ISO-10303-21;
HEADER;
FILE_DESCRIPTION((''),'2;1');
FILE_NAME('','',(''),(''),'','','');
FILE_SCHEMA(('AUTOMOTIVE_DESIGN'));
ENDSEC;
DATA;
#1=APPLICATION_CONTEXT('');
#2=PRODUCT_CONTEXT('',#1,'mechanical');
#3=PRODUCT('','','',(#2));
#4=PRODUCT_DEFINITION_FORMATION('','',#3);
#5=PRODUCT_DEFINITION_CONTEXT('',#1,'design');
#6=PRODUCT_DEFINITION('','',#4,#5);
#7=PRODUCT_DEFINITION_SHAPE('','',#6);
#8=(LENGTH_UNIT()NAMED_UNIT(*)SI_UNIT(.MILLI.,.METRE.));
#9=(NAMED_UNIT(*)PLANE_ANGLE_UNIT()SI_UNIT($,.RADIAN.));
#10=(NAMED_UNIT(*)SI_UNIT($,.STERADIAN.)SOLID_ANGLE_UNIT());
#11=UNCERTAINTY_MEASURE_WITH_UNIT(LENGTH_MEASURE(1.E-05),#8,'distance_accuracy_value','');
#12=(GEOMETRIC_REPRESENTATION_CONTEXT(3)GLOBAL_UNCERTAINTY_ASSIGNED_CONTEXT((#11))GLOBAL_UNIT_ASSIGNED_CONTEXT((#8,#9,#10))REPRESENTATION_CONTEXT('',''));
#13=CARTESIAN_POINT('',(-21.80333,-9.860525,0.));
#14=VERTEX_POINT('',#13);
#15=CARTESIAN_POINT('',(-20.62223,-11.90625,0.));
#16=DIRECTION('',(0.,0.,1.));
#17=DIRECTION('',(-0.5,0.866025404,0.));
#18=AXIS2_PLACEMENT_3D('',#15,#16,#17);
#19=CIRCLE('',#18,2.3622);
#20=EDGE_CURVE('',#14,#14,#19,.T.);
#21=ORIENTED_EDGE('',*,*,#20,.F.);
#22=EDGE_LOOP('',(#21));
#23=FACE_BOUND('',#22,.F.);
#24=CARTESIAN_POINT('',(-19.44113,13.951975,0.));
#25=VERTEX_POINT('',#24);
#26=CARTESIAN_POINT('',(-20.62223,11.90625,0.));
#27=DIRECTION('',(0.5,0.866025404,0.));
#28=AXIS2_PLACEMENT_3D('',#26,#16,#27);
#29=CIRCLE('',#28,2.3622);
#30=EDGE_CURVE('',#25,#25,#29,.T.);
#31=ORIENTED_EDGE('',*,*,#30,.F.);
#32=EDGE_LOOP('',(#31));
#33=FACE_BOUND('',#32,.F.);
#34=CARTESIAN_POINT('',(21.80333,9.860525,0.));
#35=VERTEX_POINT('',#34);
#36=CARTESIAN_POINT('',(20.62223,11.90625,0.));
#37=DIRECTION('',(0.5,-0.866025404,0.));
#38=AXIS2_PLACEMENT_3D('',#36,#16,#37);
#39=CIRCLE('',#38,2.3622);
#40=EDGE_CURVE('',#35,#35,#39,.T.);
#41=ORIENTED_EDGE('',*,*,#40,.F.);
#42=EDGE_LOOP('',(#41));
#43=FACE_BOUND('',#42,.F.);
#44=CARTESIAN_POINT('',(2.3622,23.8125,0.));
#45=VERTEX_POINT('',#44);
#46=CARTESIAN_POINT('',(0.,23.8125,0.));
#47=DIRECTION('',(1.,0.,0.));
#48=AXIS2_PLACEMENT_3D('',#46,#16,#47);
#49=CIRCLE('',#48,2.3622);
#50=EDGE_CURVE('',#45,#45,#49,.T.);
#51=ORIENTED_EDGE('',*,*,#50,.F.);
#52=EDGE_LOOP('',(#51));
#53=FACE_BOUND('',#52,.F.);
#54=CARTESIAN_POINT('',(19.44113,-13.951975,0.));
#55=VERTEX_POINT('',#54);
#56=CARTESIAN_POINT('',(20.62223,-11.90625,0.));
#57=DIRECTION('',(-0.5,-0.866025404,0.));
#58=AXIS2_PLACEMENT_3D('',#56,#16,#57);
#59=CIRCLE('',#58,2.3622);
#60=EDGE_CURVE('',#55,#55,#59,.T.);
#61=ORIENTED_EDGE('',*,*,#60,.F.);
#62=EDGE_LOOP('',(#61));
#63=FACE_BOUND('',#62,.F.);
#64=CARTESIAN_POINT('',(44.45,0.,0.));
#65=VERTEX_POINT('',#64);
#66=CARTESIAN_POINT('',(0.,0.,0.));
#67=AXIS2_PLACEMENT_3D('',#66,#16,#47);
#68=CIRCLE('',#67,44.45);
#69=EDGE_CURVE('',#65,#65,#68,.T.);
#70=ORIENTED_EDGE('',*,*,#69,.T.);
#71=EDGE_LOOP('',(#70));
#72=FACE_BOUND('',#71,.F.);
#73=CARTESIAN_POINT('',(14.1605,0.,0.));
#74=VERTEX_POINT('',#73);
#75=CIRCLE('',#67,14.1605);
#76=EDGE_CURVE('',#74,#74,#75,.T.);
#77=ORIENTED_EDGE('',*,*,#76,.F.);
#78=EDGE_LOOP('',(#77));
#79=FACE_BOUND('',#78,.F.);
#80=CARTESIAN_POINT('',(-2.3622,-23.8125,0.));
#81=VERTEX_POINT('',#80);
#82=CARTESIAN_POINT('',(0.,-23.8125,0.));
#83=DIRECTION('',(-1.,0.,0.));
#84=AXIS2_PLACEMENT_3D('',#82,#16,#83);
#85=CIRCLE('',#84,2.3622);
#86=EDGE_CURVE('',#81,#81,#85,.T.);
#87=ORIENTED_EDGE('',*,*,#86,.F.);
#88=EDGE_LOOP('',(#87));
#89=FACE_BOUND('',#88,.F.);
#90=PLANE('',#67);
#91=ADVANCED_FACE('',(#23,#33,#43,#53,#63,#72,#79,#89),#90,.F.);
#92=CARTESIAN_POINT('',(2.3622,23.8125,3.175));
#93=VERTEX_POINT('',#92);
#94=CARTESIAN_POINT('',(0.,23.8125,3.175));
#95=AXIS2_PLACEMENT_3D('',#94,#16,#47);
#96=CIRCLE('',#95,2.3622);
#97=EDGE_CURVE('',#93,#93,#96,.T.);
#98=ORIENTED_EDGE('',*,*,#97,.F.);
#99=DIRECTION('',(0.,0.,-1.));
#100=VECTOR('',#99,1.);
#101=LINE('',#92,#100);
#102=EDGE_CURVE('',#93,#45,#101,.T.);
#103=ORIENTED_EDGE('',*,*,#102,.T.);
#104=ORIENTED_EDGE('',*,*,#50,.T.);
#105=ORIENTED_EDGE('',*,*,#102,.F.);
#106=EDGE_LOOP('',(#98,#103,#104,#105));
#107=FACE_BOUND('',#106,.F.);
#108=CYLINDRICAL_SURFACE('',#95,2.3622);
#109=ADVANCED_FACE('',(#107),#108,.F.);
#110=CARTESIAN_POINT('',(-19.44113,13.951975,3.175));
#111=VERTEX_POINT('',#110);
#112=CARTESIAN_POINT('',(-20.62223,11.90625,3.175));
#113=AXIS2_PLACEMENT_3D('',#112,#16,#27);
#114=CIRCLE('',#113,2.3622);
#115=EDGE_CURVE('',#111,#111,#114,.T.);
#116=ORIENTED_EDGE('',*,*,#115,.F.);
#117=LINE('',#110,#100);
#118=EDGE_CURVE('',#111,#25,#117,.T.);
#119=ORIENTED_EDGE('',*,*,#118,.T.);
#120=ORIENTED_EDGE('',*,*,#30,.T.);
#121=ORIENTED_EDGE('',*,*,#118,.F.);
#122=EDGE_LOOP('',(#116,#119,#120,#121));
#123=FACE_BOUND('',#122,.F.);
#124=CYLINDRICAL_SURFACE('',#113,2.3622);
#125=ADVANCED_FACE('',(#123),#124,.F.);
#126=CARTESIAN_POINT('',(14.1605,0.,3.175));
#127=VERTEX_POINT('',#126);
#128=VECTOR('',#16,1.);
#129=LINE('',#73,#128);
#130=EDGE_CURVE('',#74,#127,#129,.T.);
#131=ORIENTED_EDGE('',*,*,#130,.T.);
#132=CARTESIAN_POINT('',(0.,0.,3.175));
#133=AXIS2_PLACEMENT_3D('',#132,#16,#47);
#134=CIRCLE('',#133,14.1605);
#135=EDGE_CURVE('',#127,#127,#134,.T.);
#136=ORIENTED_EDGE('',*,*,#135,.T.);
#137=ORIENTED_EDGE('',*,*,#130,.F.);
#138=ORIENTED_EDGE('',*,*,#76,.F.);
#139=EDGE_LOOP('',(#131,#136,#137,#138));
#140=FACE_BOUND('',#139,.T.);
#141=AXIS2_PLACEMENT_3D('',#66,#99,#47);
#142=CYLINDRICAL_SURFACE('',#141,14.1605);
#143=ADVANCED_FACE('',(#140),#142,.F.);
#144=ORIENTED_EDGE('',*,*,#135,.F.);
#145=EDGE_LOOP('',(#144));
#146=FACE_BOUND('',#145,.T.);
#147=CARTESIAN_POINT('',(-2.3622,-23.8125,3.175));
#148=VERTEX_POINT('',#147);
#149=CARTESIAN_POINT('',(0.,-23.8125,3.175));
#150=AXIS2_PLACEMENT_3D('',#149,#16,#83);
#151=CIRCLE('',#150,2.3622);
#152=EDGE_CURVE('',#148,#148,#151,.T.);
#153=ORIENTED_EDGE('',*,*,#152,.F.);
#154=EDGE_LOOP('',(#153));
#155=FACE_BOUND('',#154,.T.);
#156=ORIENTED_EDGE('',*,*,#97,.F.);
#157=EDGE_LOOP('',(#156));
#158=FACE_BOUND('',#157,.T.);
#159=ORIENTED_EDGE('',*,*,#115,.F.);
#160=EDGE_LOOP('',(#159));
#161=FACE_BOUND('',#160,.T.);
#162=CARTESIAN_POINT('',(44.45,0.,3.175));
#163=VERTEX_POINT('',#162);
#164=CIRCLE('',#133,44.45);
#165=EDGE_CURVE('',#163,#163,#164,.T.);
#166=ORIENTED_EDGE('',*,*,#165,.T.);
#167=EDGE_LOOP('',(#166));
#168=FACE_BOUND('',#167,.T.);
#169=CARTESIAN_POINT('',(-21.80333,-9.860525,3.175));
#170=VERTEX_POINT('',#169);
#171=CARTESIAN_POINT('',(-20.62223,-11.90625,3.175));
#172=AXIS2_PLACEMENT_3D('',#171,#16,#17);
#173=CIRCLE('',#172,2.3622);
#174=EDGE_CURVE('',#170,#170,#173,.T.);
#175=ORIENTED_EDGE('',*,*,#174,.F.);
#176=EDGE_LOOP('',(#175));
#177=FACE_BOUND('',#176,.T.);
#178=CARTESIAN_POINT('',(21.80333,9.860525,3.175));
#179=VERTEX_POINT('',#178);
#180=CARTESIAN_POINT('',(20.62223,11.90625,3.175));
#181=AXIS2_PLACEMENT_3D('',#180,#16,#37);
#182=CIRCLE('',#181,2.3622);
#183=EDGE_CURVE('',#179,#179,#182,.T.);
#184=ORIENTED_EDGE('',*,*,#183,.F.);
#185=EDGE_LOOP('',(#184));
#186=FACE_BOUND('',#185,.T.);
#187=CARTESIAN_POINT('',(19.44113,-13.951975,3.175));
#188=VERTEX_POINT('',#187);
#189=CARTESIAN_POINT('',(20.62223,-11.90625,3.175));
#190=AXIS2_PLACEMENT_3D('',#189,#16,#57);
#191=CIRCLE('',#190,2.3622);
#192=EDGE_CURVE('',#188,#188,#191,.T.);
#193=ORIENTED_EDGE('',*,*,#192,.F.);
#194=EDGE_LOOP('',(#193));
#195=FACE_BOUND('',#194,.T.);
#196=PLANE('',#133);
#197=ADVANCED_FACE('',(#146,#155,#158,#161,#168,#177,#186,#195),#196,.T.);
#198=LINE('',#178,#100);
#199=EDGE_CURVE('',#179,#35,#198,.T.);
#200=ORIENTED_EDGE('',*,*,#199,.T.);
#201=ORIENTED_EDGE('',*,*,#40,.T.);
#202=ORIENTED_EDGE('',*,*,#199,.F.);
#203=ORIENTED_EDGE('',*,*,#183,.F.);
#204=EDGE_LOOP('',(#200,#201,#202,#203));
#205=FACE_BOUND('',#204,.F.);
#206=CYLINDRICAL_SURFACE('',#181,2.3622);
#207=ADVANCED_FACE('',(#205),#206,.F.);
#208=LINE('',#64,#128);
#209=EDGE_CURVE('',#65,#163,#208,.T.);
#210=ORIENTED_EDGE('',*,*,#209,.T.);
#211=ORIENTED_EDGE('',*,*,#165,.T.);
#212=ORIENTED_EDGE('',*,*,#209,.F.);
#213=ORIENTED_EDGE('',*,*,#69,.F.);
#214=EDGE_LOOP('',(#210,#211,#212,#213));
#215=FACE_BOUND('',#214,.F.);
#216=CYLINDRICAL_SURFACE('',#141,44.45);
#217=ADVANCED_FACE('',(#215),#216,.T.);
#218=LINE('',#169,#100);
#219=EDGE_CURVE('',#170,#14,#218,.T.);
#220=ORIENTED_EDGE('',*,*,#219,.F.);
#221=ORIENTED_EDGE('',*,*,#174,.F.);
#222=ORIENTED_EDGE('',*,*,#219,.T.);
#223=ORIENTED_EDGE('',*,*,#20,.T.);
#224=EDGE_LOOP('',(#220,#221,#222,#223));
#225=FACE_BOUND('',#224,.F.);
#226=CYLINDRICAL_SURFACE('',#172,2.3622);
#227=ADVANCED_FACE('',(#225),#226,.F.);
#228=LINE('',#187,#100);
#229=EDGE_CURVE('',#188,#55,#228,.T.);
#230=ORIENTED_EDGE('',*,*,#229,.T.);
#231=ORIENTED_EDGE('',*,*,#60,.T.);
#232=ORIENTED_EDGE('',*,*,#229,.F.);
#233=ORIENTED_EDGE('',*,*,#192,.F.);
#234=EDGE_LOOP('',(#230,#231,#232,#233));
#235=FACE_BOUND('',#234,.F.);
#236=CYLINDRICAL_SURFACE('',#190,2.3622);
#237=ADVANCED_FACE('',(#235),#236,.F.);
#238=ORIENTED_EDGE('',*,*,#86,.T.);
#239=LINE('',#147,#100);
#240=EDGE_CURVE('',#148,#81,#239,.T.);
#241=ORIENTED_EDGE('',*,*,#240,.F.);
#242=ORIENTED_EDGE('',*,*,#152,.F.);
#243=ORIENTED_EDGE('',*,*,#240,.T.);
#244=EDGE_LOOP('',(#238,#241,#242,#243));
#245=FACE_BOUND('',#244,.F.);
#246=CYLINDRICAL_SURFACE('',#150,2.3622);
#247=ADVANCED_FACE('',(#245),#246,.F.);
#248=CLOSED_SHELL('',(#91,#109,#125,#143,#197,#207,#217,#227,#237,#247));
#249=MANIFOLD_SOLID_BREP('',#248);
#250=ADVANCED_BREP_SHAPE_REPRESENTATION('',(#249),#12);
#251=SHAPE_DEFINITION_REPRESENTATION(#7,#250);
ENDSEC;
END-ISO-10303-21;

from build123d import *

# Parameters (mm, degrees)
F0_R            = 44.45
F0_R_2          = 14.1605
F1_DEPTH        = 3.175
F2_R            = 2.3622
F3_DEPTH        = 3.176
F3_COPIES_COUNT = 6


# Not quite as in the source:
# - a pattern or mirror of a feature is missing from the dataset's text; its kind, count and spacing are read off the source's solid


with BuildPart() as f1:
    # F0 (on Top) → F1 (new body)
    with BuildSketch(Plane.XY):
        Circle(F0_R)
        Circle(F0_R_2, mode=Mode.SUBTRACT)
    extrude(amount=F1_DEPTH)

    # F2 (on face) → F3 (cut, through all)
    with BuildSketch(Plane.XY.offset(3.175)):
        with Locations((0, 23.8125)):
            Circle(F2_R)
    f3 = extrude(amount=-F3_DEPTH, mode=Mode.SUBTRACT)

    # F3_copies: F3 ×6 about axis
    f3_copies_axis = Axis((0, 0, 0), (0, 0, 1))
    for i in range(1, F3_COPIES_COUNT):
        add(f3.rotate(f3_copies_axis, i * 360 / F3_COPIES_COUNT), mode=Mode.SUBTRACT)


solid = f1.part
